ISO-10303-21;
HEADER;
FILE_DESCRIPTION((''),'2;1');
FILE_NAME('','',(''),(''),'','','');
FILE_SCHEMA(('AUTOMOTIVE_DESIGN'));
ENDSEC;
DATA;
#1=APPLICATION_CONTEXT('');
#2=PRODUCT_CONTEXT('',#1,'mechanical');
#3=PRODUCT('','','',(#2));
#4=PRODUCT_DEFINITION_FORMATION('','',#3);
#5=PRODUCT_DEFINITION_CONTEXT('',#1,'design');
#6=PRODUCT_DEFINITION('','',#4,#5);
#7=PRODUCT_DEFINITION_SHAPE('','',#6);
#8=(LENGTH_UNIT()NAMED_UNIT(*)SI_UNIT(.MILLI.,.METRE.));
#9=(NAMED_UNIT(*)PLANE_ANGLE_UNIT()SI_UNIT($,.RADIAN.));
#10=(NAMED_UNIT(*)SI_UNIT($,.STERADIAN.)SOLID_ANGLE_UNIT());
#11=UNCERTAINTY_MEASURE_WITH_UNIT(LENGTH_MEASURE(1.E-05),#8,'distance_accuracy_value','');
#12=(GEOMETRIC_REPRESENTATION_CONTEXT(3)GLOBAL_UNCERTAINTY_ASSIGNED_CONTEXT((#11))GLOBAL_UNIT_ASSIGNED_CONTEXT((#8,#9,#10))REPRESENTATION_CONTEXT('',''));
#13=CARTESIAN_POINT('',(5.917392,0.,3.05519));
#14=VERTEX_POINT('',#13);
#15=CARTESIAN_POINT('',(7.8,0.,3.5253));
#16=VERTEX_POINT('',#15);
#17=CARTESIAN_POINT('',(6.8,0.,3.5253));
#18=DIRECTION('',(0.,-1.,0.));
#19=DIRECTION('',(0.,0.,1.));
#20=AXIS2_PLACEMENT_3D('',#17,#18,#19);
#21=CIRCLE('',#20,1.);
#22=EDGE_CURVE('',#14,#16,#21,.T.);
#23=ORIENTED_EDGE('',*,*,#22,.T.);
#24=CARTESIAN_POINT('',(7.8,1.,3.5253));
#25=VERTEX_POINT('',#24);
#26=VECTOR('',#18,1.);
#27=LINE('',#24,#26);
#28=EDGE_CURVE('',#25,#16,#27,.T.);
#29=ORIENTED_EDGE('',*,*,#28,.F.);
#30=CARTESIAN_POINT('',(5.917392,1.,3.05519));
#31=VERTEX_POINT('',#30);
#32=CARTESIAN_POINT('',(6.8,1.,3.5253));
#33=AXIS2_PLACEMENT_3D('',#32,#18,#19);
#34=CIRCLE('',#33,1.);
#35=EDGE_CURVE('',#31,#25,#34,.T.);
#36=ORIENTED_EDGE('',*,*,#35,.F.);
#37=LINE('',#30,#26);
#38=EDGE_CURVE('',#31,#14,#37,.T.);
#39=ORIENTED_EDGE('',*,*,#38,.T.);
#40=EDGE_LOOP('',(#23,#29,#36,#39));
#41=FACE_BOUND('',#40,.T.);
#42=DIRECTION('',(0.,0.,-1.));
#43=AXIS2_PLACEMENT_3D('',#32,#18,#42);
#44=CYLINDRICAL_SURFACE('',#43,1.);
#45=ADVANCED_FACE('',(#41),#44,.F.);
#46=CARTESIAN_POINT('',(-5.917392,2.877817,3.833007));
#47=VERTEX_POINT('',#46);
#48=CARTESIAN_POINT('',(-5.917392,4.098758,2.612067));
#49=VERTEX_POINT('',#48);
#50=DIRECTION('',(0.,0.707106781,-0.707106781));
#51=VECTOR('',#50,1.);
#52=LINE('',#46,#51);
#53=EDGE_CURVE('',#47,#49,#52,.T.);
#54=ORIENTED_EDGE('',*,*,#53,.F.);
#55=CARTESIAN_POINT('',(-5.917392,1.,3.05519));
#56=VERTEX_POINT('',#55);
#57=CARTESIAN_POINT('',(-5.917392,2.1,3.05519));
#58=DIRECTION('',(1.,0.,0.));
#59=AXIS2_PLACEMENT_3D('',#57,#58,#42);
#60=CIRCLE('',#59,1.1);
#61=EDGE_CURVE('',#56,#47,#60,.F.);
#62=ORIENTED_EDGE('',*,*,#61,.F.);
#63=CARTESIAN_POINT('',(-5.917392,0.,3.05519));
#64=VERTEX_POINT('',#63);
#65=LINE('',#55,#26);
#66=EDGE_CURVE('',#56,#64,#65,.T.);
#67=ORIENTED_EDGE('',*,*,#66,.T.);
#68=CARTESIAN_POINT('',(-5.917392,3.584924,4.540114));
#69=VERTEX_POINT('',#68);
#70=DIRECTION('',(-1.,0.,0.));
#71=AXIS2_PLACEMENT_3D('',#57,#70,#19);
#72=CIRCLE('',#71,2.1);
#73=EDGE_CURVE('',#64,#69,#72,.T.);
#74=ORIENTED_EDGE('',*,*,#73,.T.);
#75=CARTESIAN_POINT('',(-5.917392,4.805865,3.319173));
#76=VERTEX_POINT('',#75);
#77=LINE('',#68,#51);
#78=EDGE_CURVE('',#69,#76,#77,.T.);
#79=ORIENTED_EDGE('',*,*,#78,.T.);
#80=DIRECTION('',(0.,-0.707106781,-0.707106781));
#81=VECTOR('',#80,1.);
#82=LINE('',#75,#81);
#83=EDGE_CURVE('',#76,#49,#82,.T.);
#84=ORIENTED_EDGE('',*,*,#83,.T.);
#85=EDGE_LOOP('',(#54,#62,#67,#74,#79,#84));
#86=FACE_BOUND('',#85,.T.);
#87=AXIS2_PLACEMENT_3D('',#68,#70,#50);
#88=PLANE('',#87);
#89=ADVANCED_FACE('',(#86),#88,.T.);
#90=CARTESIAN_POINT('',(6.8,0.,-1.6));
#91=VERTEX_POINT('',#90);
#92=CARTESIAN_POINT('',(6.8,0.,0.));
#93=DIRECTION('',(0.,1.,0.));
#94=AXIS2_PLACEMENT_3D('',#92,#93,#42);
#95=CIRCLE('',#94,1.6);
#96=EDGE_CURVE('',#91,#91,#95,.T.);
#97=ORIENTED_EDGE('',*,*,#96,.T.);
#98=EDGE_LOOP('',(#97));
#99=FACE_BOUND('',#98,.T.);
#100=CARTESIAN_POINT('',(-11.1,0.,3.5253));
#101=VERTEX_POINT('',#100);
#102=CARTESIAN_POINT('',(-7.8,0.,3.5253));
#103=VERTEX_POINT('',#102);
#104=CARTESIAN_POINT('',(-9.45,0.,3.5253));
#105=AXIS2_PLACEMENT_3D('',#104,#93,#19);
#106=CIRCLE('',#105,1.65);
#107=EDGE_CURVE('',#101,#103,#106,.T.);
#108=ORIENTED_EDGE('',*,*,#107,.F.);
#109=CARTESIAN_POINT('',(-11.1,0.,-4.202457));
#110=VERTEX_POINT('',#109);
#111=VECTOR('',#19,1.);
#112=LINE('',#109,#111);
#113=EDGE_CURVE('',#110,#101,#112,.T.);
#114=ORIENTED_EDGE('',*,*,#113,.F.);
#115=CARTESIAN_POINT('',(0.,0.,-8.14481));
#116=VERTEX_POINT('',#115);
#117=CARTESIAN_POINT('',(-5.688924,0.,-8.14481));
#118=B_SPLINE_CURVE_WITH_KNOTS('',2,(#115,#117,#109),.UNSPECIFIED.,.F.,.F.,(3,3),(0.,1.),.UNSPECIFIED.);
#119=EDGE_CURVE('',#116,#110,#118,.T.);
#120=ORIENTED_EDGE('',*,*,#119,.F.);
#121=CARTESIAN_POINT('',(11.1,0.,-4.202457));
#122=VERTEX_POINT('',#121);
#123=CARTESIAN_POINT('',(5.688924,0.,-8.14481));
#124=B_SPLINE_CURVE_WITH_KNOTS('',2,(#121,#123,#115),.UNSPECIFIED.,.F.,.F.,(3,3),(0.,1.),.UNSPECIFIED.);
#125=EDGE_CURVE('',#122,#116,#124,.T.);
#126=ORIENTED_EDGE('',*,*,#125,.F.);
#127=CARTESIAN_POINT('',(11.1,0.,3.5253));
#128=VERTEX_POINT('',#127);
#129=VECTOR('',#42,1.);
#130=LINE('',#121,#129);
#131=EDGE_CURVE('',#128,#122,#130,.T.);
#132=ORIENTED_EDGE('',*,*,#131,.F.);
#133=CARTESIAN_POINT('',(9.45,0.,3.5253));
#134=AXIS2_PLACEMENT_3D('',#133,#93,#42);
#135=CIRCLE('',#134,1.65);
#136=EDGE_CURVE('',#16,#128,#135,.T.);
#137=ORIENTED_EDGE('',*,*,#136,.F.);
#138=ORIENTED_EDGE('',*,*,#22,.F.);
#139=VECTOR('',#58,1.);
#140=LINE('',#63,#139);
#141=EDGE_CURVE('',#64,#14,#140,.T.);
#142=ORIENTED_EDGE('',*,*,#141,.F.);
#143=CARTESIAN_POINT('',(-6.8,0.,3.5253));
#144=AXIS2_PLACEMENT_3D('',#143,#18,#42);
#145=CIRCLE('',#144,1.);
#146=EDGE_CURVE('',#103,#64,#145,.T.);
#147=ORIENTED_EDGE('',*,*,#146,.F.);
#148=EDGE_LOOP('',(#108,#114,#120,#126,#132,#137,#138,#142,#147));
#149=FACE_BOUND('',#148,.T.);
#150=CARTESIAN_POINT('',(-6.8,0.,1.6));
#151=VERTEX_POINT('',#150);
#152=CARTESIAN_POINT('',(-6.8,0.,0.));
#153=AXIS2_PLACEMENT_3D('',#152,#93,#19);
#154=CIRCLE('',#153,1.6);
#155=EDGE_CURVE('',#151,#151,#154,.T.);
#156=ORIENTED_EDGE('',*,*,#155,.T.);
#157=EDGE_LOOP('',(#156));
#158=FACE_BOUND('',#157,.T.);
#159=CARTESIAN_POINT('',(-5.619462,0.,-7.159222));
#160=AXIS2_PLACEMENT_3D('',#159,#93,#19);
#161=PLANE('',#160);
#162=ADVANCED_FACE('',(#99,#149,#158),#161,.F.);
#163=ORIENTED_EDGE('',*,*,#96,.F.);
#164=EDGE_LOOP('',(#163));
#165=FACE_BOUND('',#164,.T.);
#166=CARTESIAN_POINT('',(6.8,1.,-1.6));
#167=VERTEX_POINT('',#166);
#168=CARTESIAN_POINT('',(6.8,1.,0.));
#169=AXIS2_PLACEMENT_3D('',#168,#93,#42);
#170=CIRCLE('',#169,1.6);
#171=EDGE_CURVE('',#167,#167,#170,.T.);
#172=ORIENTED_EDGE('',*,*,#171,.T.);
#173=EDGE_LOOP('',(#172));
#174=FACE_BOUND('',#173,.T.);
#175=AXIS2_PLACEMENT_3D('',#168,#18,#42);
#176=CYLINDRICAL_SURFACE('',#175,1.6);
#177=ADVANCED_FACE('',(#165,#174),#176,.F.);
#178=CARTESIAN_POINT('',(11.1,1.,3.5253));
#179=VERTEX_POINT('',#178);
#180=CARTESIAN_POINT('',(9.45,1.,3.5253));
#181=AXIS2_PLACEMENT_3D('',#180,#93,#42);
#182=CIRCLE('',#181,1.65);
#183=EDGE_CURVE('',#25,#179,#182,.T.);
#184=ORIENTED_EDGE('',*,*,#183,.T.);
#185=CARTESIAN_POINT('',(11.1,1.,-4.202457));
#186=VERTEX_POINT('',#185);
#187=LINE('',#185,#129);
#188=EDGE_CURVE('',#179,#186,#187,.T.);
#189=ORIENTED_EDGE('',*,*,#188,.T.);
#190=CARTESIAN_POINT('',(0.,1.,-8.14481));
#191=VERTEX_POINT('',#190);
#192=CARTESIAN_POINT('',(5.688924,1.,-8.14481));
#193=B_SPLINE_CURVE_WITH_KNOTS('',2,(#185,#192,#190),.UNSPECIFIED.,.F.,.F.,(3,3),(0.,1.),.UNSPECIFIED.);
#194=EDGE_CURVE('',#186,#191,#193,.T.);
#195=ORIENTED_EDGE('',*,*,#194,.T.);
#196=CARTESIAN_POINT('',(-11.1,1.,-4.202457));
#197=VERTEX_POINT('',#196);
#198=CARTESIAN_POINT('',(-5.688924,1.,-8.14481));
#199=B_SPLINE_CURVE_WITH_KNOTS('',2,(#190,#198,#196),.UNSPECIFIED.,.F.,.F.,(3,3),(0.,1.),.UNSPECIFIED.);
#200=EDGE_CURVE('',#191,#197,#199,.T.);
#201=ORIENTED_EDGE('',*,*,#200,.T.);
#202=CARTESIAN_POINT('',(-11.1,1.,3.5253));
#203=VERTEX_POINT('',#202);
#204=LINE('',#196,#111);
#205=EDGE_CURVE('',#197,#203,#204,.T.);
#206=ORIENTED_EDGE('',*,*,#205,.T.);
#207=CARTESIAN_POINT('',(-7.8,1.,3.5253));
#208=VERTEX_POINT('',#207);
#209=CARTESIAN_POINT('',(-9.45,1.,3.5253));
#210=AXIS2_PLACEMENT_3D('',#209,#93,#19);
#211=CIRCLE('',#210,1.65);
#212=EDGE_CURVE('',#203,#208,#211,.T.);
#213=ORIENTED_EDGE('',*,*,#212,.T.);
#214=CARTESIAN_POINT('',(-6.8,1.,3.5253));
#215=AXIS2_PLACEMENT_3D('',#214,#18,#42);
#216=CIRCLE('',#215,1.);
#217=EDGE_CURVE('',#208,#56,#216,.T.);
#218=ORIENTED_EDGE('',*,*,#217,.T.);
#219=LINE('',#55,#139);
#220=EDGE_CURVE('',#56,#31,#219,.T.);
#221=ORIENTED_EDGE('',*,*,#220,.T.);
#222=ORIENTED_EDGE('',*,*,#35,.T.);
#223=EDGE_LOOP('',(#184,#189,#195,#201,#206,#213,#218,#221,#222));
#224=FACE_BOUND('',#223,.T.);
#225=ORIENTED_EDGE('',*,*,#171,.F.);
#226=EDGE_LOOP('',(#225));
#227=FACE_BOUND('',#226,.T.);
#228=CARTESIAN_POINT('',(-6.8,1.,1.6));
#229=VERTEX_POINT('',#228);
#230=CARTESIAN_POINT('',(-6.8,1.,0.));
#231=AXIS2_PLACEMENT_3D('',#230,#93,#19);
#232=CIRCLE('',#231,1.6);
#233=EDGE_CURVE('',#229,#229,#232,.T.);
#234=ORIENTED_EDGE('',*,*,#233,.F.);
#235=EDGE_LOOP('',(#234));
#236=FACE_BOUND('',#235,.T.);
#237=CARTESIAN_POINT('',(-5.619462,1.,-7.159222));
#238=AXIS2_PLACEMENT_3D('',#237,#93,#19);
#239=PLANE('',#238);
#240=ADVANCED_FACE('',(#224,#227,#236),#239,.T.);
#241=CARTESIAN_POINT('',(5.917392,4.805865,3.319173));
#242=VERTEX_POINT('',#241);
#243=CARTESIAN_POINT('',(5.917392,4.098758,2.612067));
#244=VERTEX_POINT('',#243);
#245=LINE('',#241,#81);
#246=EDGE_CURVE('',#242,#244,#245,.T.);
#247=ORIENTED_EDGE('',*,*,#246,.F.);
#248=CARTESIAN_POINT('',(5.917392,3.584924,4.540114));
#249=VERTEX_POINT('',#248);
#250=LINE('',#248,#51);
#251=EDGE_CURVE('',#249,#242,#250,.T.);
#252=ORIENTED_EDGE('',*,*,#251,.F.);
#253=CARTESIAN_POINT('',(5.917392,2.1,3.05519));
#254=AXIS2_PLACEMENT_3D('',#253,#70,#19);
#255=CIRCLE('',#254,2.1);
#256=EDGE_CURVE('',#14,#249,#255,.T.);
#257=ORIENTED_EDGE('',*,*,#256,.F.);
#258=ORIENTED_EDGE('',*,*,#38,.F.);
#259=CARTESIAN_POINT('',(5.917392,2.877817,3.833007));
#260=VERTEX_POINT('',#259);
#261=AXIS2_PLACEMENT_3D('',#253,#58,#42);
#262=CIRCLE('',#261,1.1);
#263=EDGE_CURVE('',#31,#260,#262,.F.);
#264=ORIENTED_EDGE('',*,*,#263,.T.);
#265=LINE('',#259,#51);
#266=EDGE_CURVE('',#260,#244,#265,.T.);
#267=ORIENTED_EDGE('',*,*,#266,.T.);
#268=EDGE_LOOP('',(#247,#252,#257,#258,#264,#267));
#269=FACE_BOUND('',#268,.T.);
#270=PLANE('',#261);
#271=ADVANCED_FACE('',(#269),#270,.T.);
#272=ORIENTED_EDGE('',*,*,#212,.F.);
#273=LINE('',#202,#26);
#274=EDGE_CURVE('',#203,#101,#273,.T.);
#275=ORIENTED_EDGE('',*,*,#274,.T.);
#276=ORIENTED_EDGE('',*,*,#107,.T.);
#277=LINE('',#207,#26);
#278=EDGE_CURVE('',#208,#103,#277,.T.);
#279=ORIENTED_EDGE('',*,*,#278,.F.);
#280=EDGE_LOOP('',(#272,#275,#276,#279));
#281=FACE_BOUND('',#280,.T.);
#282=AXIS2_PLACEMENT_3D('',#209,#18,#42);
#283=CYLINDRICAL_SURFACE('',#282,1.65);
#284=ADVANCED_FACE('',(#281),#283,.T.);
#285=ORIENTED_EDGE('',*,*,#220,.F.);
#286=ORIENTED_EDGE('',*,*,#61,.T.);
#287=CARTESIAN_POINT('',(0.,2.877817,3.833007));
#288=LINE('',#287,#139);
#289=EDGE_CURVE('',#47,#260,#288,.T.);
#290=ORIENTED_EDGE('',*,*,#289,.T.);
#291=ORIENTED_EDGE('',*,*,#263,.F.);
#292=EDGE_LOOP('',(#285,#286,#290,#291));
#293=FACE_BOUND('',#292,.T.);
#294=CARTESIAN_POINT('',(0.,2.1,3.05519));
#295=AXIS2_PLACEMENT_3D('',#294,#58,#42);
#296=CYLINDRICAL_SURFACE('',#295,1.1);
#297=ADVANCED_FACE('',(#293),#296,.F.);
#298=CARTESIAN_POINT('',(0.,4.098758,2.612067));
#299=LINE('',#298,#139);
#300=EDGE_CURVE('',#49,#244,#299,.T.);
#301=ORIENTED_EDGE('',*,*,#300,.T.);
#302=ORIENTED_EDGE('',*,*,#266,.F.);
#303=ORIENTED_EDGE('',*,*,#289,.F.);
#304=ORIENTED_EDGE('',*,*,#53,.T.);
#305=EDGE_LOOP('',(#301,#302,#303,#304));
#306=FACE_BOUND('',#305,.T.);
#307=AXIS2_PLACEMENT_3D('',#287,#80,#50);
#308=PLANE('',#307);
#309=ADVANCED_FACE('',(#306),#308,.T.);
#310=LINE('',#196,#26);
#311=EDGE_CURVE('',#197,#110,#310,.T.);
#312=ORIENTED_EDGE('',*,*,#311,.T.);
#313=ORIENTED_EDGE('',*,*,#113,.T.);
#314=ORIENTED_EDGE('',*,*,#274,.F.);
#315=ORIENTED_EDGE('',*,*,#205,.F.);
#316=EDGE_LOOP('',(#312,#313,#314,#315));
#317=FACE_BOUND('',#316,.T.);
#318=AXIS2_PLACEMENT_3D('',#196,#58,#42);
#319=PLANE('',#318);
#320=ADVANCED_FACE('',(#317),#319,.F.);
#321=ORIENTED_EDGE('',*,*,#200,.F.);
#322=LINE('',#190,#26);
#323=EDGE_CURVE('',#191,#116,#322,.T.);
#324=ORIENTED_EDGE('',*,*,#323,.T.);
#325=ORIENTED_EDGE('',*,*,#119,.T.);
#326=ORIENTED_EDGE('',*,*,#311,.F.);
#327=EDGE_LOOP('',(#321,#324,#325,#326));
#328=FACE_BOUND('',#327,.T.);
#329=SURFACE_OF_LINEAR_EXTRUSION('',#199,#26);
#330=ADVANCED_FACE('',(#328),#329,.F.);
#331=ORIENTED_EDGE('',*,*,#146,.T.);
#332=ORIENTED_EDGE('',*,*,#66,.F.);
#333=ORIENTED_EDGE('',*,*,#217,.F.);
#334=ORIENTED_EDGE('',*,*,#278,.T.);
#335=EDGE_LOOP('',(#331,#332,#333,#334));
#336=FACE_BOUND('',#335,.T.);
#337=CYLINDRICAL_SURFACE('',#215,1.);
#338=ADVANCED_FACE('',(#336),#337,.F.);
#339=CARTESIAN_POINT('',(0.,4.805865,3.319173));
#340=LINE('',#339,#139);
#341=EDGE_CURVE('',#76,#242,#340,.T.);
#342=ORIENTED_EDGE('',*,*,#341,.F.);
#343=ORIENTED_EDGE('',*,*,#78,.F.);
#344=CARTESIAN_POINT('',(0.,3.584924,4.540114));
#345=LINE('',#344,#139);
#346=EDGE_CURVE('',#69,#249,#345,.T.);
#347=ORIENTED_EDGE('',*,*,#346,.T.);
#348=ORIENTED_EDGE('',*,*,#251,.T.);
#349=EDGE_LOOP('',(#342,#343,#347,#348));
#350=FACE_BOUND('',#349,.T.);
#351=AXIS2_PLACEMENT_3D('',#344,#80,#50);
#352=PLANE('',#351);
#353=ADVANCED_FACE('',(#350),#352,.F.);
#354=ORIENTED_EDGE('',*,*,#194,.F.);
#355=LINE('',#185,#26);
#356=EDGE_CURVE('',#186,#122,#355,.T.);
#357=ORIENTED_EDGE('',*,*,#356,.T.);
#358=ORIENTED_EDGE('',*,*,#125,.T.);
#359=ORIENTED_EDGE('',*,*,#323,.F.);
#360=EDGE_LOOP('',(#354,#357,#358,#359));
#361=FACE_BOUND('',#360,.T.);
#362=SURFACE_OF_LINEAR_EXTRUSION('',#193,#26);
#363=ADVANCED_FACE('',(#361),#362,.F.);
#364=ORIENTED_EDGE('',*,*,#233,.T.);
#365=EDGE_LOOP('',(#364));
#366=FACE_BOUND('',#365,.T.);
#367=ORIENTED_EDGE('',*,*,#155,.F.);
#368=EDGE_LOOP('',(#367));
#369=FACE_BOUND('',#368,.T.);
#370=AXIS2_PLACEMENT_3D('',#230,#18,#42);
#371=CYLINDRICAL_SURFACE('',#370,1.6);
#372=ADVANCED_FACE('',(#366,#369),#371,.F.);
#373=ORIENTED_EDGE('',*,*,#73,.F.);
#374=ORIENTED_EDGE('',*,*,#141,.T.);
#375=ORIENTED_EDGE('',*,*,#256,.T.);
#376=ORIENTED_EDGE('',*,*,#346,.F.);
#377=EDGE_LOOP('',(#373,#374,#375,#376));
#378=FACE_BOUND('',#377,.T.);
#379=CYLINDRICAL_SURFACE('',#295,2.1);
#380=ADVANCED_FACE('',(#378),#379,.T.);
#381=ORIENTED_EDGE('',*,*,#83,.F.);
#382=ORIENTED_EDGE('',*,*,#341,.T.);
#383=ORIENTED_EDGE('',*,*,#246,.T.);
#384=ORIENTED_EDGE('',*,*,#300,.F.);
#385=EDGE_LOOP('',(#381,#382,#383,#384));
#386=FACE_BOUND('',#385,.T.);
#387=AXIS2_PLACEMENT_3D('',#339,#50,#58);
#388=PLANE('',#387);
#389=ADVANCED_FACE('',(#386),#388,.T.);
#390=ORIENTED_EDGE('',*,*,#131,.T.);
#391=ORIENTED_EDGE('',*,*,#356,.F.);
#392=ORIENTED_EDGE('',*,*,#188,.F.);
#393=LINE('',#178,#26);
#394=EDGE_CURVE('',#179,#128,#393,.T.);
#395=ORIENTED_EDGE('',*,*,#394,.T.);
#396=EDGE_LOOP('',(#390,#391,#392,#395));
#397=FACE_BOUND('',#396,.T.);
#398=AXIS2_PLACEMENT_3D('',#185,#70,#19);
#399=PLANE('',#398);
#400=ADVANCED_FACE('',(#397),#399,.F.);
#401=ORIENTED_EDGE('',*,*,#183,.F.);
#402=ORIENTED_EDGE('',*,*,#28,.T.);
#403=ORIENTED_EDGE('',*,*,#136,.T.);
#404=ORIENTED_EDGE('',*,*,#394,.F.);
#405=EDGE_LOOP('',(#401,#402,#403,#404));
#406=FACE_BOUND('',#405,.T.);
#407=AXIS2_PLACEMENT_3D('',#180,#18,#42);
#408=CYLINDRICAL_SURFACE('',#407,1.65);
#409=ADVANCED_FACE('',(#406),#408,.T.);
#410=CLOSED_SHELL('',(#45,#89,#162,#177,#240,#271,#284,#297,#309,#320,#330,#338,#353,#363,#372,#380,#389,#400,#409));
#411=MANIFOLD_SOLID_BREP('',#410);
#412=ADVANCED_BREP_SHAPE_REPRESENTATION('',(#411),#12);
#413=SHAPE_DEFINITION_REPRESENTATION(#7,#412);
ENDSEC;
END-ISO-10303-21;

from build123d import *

# Parameters (mm, degrees)
SKETCH1_R           = 1.6
BOSS_EXTRUDE1_DEPTH = 1
THICKEN2_START      = -5.917392258
THICKEN2_DEPTH      = 11.834784516


# Read off the part's stored shape, not the designer's step: Thicken2
with BuildPart() as part:
    # Sketch1 → Boss-Extrude1 (new body)
    with BuildSketch(Plane(origin=(0, 0, 0), x_dir=(1, 0, 0), z_dir=(0, 1, 0))):
        with BuildLine():
            Line((-11.1, 4.202456856), (-11.1, -3.525300194))
            ThreePointArc((-11.1, -3.525300194), (-9.45, -5.175300194), (-7.8, -3.525300194))
            ThreePointArc((-7.8, -3.525300194), (-7.04227284, -2.555092036), (-5.917392258, -3.055190021))
            Line((-5.917392258, -3.055190021), (5.917392258, -3.055190021))
            ThreePointArc((5.917392258, -3.055190021), (7.04227284, -2.555092036), (7.8, -3.525300194))
            ThreePointArc((7.8, -3.525300194), (9.45, -5.175300194), (11.1, -3.525300194))
            Line((11.1, -3.525300194), (11.1, 4.202456856))
            add(Edge.make_bspline(
                [(11.1, 4.202456856), (5.688924475, 8.144809979), (0, 8.144809979)],
                knots=[0, 0, 0, 1, 1, 1], degree=2))
            add(Edge.make_bspline(
                [(-11.1, 4.202456856), (-5.688924475, 8.144809979), (0, 8.144809979)],
                knots=[0, 0, 0, 1, 1, 1], degree=2))
        make_face()
        with Locations(Location((-6.8, 0, 0), (0, 0, 270))):
            Circle(SKETCH1_R, mode=Mode.SUBTRACT)
        with Locations(Location((6.8, 0, 0), (0, 0, 90))):
            Circle(SKETCH1_R, mode=Mode.SUBTRACT)
    extrude(amount=BOSS_EXTRUDE1_DEPTH)

    # Thicken2 outline → Thicken2 (add)
    with BuildSketch(Plane.YZ.offset(THICKEN2_START)):
        with BuildLine():
            Line((2.877817459, 3.833007481), (4.098758354, 2.612066586))
            Line((4.098758354, 2.612066586), (4.805865135, 3.319173367))
            Line((4.805865135, 3.319173367), (3.58492424, 4.540114262))
            ThreePointArc((3.58492424, 4.540114262), (1.296364791, 4.99533704), (0, 3.055190021))
            Line((0, 3.055190021), (1, 3.055190021))
            ThreePointArc((1, 3.055190021), (1.679048224, 4.071457507), (2.877817459, 3.833007481))
        make_face()
    extrude(amount=THICKEN2_DEPTH)


solid = part.part
